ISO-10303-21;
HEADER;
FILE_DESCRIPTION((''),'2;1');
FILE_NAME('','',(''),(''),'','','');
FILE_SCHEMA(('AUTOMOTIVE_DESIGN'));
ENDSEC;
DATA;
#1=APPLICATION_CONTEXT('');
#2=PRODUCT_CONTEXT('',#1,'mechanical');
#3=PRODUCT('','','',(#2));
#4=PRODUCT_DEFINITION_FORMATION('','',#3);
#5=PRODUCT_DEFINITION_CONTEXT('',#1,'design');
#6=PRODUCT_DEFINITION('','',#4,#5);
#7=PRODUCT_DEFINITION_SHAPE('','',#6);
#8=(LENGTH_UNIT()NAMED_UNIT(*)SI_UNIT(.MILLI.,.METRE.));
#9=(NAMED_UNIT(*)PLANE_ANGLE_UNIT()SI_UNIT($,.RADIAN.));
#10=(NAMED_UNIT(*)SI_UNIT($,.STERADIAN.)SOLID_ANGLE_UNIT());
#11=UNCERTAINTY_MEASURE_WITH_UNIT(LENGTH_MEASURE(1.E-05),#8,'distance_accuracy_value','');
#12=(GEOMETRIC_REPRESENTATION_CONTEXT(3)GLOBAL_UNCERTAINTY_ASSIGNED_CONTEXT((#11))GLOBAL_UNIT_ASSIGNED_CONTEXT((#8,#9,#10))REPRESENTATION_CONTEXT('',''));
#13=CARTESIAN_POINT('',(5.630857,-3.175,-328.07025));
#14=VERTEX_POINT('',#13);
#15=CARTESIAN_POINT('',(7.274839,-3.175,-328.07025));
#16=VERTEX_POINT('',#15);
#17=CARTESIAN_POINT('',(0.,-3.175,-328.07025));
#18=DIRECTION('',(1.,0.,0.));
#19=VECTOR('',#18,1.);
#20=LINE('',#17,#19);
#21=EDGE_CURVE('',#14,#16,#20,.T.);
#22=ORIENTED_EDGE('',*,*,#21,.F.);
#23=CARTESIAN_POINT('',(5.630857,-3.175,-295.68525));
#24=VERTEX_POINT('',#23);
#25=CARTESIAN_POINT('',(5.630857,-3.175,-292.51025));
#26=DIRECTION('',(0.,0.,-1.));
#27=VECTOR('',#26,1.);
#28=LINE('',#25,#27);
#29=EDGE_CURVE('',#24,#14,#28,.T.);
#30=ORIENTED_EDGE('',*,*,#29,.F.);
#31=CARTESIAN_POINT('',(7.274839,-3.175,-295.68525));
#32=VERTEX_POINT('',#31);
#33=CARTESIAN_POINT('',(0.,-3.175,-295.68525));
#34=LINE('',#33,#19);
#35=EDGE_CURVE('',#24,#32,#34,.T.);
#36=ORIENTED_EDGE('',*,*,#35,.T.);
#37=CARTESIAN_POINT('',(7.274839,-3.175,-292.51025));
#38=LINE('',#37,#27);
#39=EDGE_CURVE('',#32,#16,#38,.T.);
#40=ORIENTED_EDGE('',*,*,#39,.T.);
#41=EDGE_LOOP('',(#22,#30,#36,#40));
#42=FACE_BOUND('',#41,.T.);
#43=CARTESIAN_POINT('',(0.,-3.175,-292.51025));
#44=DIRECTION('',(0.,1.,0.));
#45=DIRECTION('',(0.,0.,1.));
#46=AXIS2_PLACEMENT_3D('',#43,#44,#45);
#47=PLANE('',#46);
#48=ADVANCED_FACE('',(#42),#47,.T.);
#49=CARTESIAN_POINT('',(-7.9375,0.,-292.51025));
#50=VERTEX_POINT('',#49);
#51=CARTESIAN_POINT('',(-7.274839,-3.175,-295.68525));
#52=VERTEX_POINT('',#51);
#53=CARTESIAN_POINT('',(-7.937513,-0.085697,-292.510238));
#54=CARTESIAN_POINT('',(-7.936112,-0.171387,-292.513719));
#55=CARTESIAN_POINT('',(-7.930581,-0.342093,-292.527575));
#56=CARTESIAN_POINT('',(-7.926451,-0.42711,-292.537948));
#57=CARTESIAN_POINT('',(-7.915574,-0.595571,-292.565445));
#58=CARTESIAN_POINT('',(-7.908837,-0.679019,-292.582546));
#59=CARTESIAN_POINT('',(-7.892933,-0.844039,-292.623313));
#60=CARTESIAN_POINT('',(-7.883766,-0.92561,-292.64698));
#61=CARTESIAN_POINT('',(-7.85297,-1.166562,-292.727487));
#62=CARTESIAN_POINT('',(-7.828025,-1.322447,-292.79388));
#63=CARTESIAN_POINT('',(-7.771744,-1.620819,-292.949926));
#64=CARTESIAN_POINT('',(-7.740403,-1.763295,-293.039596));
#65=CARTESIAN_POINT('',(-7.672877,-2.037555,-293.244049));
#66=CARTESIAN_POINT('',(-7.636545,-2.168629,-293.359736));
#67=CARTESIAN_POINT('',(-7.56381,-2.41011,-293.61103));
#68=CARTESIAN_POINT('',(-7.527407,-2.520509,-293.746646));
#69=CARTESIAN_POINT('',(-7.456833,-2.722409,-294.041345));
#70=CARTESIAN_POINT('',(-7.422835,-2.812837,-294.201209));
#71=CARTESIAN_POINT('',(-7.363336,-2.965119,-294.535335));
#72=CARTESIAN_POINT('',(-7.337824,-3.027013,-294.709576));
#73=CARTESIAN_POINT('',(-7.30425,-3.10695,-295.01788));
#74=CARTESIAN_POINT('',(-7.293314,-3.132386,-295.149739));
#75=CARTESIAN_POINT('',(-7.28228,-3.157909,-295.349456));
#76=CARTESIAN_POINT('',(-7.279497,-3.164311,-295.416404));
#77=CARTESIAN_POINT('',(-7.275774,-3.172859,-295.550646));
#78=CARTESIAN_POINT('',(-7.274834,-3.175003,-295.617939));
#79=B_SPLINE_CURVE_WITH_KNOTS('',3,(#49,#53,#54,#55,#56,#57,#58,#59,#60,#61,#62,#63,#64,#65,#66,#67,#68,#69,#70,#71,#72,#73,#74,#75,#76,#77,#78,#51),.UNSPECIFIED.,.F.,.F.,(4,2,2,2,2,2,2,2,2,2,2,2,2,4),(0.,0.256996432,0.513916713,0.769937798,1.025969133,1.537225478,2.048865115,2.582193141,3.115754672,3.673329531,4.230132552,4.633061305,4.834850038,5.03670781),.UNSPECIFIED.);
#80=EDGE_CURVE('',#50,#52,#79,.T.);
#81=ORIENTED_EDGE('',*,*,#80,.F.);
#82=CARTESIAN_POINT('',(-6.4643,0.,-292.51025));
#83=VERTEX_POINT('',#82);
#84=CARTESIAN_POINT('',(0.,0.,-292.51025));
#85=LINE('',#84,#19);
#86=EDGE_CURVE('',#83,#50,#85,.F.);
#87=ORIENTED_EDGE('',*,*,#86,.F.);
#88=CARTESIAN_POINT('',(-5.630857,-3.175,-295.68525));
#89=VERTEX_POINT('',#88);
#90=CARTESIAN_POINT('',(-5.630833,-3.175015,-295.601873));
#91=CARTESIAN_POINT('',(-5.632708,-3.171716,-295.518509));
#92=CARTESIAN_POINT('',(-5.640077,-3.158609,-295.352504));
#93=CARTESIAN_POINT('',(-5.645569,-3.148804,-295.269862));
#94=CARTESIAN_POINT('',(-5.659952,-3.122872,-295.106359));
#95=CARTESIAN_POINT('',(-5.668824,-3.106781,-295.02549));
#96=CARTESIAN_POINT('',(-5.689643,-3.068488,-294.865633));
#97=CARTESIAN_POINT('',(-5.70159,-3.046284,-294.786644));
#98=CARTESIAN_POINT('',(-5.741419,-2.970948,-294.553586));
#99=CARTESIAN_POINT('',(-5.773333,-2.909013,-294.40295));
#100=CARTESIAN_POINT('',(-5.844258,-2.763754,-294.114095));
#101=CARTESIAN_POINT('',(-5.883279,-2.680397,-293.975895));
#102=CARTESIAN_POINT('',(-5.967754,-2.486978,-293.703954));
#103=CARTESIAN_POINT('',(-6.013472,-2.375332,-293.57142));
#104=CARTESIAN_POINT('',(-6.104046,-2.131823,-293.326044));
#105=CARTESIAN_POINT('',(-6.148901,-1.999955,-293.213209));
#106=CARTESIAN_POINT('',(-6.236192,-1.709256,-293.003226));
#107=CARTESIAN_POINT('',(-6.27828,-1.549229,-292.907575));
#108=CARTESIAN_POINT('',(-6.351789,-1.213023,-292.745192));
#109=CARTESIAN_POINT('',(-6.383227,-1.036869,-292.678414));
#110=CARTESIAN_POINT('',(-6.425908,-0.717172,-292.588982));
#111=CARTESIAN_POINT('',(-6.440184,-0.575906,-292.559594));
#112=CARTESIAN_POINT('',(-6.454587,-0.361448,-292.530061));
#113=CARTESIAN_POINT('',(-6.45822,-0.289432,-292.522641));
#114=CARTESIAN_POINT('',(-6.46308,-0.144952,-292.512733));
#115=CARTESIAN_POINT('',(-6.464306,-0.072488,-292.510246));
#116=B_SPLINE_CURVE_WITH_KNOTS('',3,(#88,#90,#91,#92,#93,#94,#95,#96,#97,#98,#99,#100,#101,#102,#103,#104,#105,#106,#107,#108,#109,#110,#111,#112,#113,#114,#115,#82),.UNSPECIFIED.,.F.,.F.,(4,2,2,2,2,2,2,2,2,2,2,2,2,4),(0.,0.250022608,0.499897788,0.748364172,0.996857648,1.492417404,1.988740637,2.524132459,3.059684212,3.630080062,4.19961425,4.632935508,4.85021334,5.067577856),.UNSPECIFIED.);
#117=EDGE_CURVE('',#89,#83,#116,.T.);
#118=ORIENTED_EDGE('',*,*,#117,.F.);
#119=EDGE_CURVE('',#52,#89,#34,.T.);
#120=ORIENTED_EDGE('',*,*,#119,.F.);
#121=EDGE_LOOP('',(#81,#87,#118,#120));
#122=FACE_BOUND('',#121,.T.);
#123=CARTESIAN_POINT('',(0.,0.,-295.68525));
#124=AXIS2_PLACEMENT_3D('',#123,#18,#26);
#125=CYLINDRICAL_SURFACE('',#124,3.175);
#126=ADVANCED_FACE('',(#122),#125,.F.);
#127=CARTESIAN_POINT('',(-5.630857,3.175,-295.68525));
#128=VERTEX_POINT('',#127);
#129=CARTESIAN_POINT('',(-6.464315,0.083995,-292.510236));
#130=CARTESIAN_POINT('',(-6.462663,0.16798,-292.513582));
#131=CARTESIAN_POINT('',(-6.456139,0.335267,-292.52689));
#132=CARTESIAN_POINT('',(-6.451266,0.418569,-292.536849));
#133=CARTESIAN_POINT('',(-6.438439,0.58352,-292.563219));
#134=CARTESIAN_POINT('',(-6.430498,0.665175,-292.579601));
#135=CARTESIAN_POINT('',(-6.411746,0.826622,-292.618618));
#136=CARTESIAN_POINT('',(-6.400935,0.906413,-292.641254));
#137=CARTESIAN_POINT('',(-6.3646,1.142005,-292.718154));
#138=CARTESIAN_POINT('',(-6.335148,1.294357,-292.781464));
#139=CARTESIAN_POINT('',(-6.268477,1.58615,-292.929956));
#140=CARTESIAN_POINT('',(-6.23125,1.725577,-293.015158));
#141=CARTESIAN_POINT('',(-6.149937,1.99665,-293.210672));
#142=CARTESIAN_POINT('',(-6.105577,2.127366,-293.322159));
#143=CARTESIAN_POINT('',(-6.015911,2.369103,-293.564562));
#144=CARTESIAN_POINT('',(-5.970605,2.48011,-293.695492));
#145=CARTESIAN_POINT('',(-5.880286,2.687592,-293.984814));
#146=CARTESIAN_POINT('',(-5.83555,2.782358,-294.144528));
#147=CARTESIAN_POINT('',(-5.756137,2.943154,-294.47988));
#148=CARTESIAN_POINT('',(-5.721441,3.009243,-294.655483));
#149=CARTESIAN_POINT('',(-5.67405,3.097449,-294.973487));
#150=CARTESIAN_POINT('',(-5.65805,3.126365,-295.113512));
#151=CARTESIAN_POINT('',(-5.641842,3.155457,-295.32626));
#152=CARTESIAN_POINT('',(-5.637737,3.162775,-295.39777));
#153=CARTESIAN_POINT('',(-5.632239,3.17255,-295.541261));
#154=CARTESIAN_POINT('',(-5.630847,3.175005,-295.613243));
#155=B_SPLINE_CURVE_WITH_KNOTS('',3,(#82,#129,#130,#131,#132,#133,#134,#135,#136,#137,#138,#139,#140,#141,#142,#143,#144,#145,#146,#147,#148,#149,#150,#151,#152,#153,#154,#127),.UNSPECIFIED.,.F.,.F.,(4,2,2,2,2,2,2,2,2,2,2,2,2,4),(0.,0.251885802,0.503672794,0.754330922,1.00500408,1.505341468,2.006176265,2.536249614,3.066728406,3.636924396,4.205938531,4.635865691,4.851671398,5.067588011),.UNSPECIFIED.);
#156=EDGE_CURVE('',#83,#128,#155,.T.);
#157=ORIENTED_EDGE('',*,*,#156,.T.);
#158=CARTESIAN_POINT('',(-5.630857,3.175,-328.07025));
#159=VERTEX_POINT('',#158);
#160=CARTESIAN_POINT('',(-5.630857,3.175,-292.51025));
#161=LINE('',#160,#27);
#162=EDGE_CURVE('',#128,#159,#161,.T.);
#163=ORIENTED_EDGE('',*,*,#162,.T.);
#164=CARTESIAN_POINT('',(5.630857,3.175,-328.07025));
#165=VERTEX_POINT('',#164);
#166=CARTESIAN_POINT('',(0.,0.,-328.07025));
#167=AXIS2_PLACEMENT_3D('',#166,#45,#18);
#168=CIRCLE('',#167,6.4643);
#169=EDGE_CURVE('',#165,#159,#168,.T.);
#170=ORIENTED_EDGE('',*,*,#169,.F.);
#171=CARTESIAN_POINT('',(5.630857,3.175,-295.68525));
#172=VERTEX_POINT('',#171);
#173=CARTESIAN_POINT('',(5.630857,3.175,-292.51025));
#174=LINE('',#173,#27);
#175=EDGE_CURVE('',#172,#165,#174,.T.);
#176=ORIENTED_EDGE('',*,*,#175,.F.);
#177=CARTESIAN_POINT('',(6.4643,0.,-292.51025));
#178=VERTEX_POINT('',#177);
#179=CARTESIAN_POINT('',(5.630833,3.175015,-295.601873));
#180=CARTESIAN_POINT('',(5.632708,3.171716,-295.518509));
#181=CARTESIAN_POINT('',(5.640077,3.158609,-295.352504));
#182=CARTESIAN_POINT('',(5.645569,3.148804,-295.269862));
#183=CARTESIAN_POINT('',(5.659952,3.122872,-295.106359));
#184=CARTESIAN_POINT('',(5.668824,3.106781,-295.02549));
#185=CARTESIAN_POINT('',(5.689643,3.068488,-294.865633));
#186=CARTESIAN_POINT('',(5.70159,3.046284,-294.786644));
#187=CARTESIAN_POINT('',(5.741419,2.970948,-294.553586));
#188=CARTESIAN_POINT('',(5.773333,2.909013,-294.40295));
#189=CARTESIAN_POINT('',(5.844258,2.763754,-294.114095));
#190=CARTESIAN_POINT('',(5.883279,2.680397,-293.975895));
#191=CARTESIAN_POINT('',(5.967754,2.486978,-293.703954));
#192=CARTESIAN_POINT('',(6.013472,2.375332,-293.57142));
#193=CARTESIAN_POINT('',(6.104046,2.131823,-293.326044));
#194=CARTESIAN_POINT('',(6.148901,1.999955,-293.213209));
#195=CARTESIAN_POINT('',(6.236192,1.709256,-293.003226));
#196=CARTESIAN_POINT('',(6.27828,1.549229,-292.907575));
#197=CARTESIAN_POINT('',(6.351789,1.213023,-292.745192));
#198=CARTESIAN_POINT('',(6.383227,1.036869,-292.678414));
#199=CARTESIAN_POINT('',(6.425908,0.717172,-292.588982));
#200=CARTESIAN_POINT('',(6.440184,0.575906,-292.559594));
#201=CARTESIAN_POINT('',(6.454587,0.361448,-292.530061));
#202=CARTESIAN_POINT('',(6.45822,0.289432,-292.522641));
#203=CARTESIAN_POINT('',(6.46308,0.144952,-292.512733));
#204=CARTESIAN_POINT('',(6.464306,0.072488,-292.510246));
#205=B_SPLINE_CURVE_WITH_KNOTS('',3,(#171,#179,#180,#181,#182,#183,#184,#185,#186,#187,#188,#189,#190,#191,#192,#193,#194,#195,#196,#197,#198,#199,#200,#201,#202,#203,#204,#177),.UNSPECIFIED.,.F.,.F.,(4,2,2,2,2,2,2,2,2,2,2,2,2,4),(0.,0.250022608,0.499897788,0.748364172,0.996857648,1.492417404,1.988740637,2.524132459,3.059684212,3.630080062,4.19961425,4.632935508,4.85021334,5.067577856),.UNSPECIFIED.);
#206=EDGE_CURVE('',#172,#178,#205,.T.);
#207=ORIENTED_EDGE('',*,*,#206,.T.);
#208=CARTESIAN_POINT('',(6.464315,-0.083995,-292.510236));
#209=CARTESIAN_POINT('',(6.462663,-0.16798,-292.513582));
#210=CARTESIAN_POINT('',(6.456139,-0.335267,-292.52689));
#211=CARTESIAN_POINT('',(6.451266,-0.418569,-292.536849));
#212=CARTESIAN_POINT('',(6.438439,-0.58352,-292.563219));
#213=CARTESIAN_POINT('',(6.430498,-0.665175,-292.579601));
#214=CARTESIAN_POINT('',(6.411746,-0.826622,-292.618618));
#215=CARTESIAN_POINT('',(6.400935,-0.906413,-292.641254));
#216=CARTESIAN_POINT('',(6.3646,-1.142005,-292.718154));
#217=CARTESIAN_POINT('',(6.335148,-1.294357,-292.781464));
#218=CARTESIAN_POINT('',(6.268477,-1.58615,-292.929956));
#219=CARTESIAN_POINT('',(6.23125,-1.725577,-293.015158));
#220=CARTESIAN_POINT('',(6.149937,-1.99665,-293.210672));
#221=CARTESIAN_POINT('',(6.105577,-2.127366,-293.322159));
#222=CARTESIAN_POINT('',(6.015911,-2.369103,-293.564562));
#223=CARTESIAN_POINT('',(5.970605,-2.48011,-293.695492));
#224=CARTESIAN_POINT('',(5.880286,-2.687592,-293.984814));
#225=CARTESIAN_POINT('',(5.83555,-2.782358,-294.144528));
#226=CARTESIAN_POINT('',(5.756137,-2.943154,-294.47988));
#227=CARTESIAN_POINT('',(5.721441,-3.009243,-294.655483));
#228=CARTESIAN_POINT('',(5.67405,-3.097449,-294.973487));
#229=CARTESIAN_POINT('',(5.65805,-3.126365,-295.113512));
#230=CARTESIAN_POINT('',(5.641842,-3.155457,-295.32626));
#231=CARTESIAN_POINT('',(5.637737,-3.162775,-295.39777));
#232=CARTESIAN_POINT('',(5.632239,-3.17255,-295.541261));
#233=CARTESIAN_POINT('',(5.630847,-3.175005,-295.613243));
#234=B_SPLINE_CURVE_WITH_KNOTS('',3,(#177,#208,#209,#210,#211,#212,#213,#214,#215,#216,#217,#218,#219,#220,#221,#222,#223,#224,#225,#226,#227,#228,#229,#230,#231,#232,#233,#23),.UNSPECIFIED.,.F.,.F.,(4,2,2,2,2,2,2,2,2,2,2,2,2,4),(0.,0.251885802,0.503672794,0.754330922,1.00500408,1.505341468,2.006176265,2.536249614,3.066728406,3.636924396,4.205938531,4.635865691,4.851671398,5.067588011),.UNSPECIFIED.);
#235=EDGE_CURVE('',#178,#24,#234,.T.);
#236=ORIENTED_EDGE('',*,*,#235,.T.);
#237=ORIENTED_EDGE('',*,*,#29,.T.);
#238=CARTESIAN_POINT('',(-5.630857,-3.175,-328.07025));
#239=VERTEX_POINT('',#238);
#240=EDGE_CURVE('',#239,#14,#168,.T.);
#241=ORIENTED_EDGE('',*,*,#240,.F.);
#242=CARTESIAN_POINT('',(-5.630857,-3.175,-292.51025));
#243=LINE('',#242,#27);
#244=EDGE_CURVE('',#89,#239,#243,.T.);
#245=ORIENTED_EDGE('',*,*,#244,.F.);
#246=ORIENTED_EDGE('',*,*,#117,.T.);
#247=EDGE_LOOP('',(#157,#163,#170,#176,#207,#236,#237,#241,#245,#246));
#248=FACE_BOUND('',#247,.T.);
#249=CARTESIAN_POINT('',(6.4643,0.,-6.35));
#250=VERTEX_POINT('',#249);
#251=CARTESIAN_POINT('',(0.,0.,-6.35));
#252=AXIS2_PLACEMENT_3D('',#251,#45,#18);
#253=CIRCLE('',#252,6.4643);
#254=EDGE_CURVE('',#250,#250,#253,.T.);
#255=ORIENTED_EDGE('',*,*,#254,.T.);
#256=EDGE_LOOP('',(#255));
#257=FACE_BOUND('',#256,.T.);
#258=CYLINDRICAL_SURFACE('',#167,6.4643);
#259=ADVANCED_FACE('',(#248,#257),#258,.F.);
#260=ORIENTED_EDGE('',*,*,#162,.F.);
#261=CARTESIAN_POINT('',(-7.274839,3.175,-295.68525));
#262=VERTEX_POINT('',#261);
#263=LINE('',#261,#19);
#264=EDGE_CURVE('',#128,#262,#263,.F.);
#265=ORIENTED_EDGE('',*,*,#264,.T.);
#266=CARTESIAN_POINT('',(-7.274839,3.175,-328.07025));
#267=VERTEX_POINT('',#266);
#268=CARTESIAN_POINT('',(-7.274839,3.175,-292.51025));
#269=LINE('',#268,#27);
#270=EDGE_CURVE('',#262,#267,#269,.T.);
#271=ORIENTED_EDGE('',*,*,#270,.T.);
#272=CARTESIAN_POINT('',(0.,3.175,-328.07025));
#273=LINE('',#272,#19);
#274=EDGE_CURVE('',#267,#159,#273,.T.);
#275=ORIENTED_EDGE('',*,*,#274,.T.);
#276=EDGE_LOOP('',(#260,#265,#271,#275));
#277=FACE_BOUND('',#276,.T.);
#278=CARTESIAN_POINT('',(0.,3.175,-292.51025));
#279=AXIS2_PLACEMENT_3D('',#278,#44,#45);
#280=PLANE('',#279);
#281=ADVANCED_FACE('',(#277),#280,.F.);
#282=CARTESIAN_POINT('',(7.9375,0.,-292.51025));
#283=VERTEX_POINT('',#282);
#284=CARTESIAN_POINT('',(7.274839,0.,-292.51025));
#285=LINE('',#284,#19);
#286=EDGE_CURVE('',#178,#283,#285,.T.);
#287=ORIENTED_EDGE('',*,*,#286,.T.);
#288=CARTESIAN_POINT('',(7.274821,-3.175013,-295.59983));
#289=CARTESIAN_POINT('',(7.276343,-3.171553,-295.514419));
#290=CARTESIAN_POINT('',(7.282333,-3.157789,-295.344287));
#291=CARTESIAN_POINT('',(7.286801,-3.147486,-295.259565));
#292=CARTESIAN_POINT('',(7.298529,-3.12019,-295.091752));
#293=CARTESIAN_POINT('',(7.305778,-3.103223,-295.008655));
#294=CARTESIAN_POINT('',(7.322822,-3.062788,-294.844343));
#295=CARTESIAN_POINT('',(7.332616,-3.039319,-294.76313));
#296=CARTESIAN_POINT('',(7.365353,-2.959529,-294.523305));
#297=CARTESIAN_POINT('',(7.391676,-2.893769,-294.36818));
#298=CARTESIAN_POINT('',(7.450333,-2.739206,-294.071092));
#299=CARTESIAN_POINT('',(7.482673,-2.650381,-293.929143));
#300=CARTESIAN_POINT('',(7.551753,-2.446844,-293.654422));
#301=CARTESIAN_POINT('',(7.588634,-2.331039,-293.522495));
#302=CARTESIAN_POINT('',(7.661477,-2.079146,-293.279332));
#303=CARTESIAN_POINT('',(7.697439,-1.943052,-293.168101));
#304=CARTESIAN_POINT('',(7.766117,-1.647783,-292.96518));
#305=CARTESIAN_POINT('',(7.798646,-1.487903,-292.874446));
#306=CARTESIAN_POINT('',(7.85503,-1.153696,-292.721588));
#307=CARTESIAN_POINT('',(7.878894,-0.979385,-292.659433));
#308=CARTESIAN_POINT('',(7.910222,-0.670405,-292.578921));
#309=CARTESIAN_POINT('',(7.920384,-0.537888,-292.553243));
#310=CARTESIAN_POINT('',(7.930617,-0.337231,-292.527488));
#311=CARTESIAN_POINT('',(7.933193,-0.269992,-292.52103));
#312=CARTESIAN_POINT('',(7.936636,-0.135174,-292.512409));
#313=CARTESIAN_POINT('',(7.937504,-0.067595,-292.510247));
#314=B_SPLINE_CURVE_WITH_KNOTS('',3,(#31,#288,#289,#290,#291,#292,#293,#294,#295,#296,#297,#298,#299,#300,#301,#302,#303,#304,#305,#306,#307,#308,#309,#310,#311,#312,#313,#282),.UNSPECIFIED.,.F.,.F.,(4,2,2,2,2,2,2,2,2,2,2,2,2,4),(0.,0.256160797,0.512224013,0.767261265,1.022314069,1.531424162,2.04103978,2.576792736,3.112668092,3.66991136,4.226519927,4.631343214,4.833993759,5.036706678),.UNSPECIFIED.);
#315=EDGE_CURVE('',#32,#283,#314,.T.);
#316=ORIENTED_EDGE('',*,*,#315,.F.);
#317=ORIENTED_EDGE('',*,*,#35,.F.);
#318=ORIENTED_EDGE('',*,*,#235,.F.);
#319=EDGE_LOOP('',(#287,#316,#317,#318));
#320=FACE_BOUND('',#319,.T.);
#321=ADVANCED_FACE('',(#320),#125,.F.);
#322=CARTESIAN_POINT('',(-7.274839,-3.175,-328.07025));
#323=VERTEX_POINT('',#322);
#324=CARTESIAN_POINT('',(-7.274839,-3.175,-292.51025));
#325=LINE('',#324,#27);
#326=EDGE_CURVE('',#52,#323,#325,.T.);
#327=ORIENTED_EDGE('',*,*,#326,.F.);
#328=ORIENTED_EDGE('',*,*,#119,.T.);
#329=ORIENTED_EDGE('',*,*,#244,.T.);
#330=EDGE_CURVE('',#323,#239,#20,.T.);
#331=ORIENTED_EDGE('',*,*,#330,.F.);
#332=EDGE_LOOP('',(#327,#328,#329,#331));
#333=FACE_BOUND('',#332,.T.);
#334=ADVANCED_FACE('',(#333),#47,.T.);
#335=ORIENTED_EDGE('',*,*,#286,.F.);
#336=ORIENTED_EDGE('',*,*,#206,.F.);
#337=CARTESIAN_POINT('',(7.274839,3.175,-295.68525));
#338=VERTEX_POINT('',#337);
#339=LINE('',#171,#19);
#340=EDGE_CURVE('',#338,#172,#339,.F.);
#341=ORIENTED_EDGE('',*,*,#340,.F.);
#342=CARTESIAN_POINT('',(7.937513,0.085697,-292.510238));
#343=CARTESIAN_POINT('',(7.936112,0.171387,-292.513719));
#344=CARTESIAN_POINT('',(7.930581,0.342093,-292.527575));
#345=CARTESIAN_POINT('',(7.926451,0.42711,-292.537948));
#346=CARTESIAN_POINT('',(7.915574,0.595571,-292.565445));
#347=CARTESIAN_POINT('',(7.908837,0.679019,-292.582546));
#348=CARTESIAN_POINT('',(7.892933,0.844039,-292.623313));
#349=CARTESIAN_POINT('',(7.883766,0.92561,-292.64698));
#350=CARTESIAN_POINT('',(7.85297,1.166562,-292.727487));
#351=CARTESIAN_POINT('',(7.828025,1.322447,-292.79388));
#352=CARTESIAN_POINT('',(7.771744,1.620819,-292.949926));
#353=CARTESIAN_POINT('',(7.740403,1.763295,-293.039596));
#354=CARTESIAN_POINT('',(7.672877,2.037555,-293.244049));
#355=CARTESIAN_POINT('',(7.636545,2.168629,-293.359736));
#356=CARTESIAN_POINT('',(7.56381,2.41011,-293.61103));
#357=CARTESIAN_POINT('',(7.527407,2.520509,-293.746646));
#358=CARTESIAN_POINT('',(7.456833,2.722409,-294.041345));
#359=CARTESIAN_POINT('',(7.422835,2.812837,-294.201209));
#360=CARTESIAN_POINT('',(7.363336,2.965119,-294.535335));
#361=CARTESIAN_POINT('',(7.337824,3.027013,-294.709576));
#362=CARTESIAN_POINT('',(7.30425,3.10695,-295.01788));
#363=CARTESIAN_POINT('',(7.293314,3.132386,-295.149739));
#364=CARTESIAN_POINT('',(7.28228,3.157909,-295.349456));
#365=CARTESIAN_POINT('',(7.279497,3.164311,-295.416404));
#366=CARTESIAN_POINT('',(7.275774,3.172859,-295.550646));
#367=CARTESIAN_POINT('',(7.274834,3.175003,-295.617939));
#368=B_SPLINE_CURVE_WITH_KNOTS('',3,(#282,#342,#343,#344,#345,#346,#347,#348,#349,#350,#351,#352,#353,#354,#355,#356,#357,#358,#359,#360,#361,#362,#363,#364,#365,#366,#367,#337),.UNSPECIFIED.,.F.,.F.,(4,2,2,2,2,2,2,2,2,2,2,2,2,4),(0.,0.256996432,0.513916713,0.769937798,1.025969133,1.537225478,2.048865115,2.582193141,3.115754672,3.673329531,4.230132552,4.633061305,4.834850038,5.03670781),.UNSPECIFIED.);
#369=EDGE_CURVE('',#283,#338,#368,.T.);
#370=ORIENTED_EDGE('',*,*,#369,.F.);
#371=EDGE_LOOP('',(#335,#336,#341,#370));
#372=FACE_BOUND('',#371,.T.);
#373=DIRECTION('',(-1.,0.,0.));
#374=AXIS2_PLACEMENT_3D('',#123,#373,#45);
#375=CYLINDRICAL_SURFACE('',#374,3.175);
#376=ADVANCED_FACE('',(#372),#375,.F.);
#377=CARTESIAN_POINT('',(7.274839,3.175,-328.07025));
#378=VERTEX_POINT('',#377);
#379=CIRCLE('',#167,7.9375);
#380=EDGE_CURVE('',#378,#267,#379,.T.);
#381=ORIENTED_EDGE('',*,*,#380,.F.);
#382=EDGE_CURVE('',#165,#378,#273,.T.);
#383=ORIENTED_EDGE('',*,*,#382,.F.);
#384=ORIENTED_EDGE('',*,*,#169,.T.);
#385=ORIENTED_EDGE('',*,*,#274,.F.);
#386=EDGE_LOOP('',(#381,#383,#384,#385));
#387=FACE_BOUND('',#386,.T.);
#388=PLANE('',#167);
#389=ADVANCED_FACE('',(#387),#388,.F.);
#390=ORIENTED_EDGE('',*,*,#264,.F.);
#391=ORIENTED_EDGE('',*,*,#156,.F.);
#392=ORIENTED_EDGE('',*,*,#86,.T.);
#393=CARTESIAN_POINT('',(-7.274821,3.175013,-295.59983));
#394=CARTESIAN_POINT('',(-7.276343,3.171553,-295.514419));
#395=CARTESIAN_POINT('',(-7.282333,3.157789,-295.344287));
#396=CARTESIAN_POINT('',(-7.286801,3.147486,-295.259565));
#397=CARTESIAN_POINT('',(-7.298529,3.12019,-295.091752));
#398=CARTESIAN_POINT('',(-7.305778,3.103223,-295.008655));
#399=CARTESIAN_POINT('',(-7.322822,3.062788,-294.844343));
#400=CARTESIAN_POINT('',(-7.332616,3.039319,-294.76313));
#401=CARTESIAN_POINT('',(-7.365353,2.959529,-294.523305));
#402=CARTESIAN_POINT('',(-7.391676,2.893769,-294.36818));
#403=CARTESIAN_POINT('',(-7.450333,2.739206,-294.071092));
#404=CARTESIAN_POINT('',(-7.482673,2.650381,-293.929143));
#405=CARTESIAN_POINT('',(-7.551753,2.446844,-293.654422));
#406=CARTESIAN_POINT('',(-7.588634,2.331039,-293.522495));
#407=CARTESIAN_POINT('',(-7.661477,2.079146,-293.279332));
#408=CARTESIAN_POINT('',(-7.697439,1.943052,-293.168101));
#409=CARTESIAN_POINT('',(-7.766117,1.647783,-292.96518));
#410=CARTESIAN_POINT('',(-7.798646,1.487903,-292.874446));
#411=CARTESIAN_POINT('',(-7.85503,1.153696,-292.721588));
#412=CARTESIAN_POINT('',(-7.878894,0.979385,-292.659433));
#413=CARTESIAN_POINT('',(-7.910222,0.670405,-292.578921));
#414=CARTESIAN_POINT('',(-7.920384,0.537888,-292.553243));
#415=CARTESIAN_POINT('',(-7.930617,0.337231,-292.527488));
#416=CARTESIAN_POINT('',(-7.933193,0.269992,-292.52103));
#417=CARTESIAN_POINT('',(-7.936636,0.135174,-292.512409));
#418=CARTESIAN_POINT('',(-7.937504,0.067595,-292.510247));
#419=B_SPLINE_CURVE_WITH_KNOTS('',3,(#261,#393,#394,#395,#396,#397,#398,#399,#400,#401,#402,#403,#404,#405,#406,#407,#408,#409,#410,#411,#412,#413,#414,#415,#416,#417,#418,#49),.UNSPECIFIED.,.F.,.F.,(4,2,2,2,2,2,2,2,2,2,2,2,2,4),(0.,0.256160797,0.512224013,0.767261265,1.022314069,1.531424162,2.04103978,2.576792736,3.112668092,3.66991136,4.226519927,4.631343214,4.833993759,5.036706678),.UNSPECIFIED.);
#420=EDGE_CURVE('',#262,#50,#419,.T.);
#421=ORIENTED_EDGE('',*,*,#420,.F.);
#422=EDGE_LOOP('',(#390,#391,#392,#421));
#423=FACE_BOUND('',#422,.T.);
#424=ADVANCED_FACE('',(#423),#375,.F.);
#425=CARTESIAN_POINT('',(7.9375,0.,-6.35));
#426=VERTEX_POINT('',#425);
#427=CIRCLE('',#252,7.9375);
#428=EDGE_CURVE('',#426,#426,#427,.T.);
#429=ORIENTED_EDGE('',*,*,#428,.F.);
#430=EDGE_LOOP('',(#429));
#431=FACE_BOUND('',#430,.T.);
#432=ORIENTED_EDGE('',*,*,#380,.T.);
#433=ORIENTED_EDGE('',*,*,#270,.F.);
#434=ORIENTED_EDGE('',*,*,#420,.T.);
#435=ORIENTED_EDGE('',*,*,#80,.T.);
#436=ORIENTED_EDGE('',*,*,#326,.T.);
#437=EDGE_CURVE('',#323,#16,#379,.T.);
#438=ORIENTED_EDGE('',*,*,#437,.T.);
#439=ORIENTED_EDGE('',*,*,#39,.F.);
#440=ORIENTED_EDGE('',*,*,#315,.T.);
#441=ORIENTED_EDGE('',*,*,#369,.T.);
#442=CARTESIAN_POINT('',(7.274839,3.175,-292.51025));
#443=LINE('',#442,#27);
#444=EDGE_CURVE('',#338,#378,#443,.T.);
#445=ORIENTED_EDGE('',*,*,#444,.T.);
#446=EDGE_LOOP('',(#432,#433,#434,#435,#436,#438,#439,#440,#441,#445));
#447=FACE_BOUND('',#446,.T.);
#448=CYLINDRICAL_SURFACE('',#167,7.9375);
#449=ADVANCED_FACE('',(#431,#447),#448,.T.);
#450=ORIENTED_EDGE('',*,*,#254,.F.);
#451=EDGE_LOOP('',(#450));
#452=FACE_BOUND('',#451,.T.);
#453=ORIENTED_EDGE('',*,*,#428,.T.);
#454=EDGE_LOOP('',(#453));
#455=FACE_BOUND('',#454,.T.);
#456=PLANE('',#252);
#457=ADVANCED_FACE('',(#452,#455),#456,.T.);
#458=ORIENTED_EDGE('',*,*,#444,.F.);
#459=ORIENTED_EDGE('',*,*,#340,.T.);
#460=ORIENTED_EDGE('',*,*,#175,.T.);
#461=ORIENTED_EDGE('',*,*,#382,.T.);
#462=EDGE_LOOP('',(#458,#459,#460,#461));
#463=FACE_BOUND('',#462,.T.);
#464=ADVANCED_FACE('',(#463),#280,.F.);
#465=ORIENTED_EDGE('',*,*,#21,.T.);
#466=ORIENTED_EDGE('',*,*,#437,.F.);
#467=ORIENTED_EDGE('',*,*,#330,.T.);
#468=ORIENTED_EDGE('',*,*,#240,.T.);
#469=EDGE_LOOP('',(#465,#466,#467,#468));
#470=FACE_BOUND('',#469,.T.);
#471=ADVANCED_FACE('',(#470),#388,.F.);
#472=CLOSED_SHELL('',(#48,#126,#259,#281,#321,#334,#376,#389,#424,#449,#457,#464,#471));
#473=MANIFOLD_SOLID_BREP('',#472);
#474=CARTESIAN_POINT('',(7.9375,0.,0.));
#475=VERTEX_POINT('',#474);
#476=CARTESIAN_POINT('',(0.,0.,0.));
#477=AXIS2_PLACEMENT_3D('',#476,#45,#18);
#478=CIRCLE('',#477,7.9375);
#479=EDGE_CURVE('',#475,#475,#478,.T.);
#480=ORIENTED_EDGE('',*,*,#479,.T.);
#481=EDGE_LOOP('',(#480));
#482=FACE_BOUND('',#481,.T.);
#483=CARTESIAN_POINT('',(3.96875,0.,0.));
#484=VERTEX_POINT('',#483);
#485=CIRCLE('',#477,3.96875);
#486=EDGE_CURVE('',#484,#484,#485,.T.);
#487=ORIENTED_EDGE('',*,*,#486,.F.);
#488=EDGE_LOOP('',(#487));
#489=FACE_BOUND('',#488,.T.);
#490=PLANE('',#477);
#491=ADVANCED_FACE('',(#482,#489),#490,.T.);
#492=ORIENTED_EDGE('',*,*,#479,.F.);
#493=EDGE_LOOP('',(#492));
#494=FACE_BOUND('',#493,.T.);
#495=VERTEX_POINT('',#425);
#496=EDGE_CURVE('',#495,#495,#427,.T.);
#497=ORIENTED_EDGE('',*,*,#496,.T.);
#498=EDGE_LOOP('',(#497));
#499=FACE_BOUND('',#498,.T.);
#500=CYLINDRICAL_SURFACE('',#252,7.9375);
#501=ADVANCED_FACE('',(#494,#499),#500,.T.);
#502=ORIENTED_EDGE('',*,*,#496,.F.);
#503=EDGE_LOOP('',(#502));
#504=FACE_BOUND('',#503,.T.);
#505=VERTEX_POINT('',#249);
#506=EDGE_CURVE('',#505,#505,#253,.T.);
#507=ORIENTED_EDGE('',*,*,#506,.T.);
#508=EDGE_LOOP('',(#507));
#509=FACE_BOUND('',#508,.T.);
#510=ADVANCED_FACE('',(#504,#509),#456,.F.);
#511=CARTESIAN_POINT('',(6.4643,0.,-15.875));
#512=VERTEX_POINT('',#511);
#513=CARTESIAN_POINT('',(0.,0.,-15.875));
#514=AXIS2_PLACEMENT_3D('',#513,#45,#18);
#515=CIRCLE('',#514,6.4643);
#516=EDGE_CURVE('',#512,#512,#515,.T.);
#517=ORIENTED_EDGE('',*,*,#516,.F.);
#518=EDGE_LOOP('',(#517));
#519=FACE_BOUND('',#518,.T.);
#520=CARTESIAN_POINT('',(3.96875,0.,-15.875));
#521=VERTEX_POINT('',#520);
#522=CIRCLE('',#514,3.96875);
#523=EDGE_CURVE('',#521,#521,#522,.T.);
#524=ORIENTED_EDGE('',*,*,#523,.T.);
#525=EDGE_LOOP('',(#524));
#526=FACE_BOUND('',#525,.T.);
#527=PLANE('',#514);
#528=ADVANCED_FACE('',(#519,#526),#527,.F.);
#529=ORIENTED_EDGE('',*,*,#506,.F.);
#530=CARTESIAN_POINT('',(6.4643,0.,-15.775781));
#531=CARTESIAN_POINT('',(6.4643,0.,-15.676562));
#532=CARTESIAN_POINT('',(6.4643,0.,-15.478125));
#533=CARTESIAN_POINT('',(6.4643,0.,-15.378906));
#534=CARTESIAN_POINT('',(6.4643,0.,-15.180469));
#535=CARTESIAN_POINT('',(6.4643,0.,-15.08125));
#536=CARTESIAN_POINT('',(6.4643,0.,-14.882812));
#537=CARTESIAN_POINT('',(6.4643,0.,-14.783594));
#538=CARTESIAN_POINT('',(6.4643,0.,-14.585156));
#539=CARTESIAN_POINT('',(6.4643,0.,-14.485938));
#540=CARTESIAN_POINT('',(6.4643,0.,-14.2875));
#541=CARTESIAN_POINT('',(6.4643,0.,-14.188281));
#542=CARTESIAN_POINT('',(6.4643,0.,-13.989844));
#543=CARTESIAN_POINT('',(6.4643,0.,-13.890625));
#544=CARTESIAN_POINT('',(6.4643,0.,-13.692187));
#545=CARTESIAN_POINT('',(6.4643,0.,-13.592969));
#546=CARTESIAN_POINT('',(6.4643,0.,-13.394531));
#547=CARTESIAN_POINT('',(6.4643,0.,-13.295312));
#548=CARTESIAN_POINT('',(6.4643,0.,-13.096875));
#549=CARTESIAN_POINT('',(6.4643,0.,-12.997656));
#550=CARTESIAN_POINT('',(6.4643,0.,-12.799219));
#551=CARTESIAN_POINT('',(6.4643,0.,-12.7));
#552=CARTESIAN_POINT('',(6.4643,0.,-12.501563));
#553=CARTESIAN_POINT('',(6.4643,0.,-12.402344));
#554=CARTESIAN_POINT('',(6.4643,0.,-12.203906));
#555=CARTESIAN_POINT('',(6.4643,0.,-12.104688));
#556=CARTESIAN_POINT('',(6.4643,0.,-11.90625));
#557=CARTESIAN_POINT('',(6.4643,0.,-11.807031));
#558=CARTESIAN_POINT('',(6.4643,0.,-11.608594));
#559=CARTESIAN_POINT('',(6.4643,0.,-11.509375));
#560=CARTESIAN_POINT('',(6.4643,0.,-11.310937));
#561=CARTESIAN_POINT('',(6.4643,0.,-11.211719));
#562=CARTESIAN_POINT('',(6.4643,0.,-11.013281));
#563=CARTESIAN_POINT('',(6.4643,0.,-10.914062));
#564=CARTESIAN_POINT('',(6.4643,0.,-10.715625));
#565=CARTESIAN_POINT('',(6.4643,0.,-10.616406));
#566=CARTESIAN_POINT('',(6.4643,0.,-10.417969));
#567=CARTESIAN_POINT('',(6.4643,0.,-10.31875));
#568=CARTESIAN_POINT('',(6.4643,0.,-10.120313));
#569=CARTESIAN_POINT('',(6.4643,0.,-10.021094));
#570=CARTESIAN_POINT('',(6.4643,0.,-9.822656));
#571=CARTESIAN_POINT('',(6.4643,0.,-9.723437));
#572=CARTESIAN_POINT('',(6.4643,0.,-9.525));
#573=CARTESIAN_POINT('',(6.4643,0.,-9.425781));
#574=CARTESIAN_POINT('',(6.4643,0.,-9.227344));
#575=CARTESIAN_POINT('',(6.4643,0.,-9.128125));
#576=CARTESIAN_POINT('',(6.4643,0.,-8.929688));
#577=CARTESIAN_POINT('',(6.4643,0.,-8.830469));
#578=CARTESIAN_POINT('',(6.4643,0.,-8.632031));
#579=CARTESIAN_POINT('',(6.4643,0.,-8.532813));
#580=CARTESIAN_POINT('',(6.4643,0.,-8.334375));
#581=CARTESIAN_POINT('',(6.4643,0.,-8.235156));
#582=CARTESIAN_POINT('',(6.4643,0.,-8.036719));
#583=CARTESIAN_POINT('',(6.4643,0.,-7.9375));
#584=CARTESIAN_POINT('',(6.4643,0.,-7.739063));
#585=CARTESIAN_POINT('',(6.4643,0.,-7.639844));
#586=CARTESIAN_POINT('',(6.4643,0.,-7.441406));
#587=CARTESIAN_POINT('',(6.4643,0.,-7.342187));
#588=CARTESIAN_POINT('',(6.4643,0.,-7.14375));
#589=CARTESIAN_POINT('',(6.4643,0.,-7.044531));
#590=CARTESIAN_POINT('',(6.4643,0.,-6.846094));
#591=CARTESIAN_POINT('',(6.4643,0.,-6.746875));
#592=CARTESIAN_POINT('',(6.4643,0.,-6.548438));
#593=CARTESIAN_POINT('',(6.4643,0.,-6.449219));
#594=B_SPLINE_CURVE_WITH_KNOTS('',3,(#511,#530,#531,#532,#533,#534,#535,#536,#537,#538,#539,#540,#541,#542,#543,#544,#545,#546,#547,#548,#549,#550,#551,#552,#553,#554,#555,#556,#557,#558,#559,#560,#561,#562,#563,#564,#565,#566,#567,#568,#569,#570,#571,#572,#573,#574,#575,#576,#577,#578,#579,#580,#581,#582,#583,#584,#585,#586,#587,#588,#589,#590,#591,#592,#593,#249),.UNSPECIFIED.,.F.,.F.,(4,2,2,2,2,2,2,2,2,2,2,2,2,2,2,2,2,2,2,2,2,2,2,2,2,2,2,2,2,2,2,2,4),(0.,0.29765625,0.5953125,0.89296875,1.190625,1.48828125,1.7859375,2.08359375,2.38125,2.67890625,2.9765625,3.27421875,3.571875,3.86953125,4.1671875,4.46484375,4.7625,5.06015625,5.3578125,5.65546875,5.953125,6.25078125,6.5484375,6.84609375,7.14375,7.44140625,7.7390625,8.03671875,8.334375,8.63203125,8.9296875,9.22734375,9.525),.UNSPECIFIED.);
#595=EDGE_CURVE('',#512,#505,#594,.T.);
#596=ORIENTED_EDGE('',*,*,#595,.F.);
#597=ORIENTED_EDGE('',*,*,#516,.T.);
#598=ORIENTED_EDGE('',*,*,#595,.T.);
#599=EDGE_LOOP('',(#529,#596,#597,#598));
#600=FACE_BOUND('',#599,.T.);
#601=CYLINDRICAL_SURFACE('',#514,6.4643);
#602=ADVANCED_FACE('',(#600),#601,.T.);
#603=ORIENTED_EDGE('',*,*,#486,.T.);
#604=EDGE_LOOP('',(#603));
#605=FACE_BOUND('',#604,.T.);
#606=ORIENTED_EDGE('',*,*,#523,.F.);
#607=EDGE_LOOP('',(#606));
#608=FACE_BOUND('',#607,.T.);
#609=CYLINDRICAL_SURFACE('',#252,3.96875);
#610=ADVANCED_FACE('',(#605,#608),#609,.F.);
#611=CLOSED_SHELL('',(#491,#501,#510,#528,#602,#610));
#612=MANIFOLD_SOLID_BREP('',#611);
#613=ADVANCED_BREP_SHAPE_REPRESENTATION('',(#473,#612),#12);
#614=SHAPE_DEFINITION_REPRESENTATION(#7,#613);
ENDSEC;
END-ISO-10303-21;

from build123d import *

# Parameters (mm, degrees)
THREADED_INSERT_1_1_DEPTH = 6.35
THREADED_START            = -6.35
THREADED_INSERT_1_2_DEPTH = 9.525
A_ARM_START               = -6.35
A_ARM_TUBE_DEPTH          = 321.72025
APEX_START                = -292.51025
APEX_SLOT_DEPTH           = 35.56
FILLET1_R                 = 3.175


with BuildPart() as part:
    # Sketch1 → Threaded insert 1-1 (new body)
    with BuildSketch(Plane.XY):
        with BuildLine():
            ThreePointArc((-2.38125, 3.175), (0, 3.96875), (2.38125, 3.175))
            Line((2.38125, 3.175), (5.630856905, 3.175))
            ThreePointArc((5.630856905, 3.175), (0, 6.4643), (-5.630856905, 3.175))
            Line((-5.630856905, 3.175), (-2.38125, 3.175))
        make_face()
        with BuildLine():
            ThreePointArc((-5.630856905, 3.175), (0, 6.4643), (5.630856905, 3.175))
            Line((5.630856905, 3.175), (7.274838916, 3.175))
            ThreePointArc((7.274838916, 3.175), (0, 7.9375), (-7.274838916, 3.175))
            Line((-7.274838916, 3.175), (-5.630856905, 3.175))
        make_face()
        with BuildLine():
            ThreePointArc((2.38125, 3.175), (3.549757914, 1.774878957), (3.96875, 0))
            Line((3.96875, 0), (6.4643, 0))
            ThreePointArc((6.4643, 0), (6.252468424, 1.641283978), (5.630856905, 3.175))
            Line((5.630856905, 3.175), (2.38125, 3.175))
        make_face()
        with BuildLine():
            Line((-6.4643, 0), (-3.96875, 0))
            ThreePointArc((-3.96875, 0), (-3.549757914, 1.774878957), (-2.38125, 3.175))
            Line((-2.38125, 3.175), (-5.630856905, 3.175))
            ThreePointArc((-5.630856905, 3.175), (-6.252468424, 1.641283978), (-6.4643, 0))
        make_face()
        with BuildLine():
            ThreePointArc((5.630856905, 3.175), (6.252468424, 1.641283978), (6.4643, 0))
            Line((6.4643, 0), (7.9375, 0))
            ThreePointArc((7.9375, 0), (7.770068859, 1.621707797), (7.274838916, 3.175))
            Line((7.274838916, 3.175), (5.630856905, 3.175))
        make_face()
        with BuildLine():
            Line((-7.9375, 0), (-6.4643, 0))
            ThreePointArc((-6.4643, 0), (-6.252468424, 1.641283978), (-5.630856905, 3.175))
            Line((-5.630856905, 3.175), (-7.274838916, 3.175))
            ThreePointArc((-7.274838916, 3.175), (-7.770068859, 1.621707797), (-7.9375, 0))
        make_face()
        with BuildLine():
            Line((7.9375, 0), (6.4643, 0))
            ThreePointArc((6.4643, 0), (6.252468424, -1.641283978), (5.630856905, -3.175))
            Line((5.630856905, -3.175), (7.274838916, -3.175))
            ThreePointArc((7.274838916, -3.175), (7.770068859, -1.621707797), (7.9375, 0))
        make_face()
        with BuildLine():
            ThreePointArc((-5.630856905, -3.175), (-6.252468424, -1.641283978), (-6.4643, 0))
            Line((-6.4643, 0), (-7.9375, 0))
            ThreePointArc((-7.9375, 0), (-7.770068859, -1.621707797), (-7.274838916, -3.175))
            Line((-7.274838916, -3.175), (-5.630856905, -3.175))
        make_face()
        with BuildLine():
            Line((6.4643, 0), (3.96875, 0))
            ThreePointArc((3.96875, 0), (3.549757914, -1.774878957), (2.38125, -3.175))
            Line((2.38125, -3.175), (5.630856905, -3.175))
            ThreePointArc((5.630856905, -3.175), (6.252468424, -1.641283978), (6.4643, 0))
        make_face()
        with BuildLine():
            ThreePointArc((-2.38125, -3.175), (-3.549757914, -1.774878957), (-3.96875, 0))
            Line((-3.96875, 0), (-6.4643, 0))
            ThreePointArc((-6.4643, 0), (-6.252468424, -1.641283978), (-5.630856905, -3.175))
            Line((-5.630856905, -3.175), (-2.38125, -3.175))
        make_face()
        with BuildLine():
            Line((5.630856905, -3.175), (2.38125, -3.175))
            ThreePointArc((2.38125, -3.175), (0, -3.96875), (-2.38125, -3.175))
            Line((-2.38125, -3.175), (-5.630856905, -3.175))
            ThreePointArc((-5.630856905, -3.175), (0, -6.4643), (5.630856905, -3.175))
        make_face()
        with BuildLine():
            Line((7.274838916, -3.175), (5.630856905, -3.175))
            ThreePointArc((5.630856905, -3.175), (0, -6.4643), (-5.630856905, -3.175))
            Line((-5.630856905, -3.175), (-7.274838916, -3.175))
            ThreePointArc((-7.274838916, -3.175), (0, -7.9375), (7.274838916, -3.175))
        make_face()
    extrude(amount=-THREADED_INSERT_1_1_DEPTH)

    # Sketch1<3> → Threaded insert 1-2 (add)
    with BuildSketch(Plane.XY.offset(THREADED_START)):
        with BuildLine():
            ThreePointArc((-2.38125, 3.175), (0, 3.96875), (2.38125, 3.175))
            Line((2.38125, 3.175), (5.630856905, 3.175))
            ThreePointArc((5.630856905, 3.175), (0, 6.4643), (-5.630856905, 3.175))
            Line((-5.630856905, 3.175), (-2.38125, 3.175))
        make_face()
        with BuildLine():
            ThreePointArc((2.38125, 3.175), (3.549757914, 1.774878957), (3.96875, 0))
            Line((3.96875, 0), (6.4643, 0))
            ThreePointArc((6.4643, 0), (6.252468424, 1.641283978), (5.630856905, 3.175))
            Line((5.630856905, 3.175), (2.38125, 3.175))
        make_face()
        with BuildLine():
            Line((-6.4643, 0), (-3.96875, 0))
            ThreePointArc((-3.96875, 0), (-3.549757914, 1.774878957), (-2.38125, 3.175))
            Line((-2.38125, 3.175), (-5.630856905, 3.175))
            ThreePointArc((-5.630856905, 3.175), (-6.252468424, 1.641283978), (-6.4643, 0))
        make_face()
        with BuildLine():
            Line((6.4643, 0), (3.96875, 0))
            ThreePointArc((3.96875, 0), (3.549757914, -1.774878957), (2.38125, -3.175))
            Line((2.38125, -3.175), (5.630856905, -3.175))
            ThreePointArc((5.630856905, -3.175), (6.252468424, -1.641283978), (6.4643, 0))
        make_face()
        with BuildLine():
            ThreePointArc((-2.38125, -3.175), (-3.549757914, -1.774878957), (-3.96875, 0))
            Line((-3.96875, 0), (-6.4643, 0))
            ThreePointArc((-6.4643, 0), (-6.252468424, -1.641283978), (-5.630856905, -3.175))
            Line((-5.630856905, -3.175), (-2.38125, -3.175))
        make_face()
        with BuildLine():
            Line((5.630856905, -3.175), (2.38125, -3.175))
            ThreePointArc((2.38125, -3.175), (0, -3.96875), (-2.38125, -3.175))
            Line((-2.38125, -3.175), (-5.630856905, -3.175))
            ThreePointArc((-5.630856905, -3.175), (0, -6.4643), (5.630856905, -3.175))
        make_face()
    extrude(amount=-THREADED_INSERT_1_2_DEPTH)


with BuildPart() as body_2:
    # Sketch1<4> → A-arm tube (new body)
    with BuildSketch(Plane.XY.offset(A_ARM_START)):
        with BuildLine():
            ThreePointArc((-5.630856905, 3.175), (0, 6.4643), (5.630856905, 3.175))
            Line((5.630856905, 3.175), (7.274838916, 3.175))
            ThreePointArc((7.274838916, 3.175), (0, 7.9375), (-7.274838916, 3.175))
            Line((-7.274838916, 3.175), (-5.630856905, 3.175))
        make_face()
        with BuildLine():
            ThreePointArc((5.630856905, 3.175), (6.252468424, 1.641283978), (6.4643, 0))
            Line((6.4643, 0), (7.9375, 0))
            ThreePointArc((7.9375, 0), (7.770068859, 1.621707797), (7.274838916, 3.175))
            Line((7.274838916, 3.175), (5.630856905, 3.175))
        make_face()
        with BuildLine():
            Line((-7.9375, 0), (-6.4643, 0))
            ThreePointArc((-6.4643, 0), (-6.252468424, 1.641283978), (-5.630856905, 3.175))
            Line((-5.630856905, 3.175), (-7.274838916, 3.175))
            ThreePointArc((-7.274838916, 3.175), (-7.770068859, 1.621707797), (-7.9375, 0))
        make_face()
        with BuildLine():
            Line((7.9375, 0), (6.4643, 0))
            ThreePointArc((6.4643, 0), (6.252468424, -1.641283978), (5.630856905, -3.175))
            Line((5.630856905, -3.175), (7.274838916, -3.175))
            ThreePointArc((7.274838916, -3.175), (7.770068859, -1.621707797), (7.9375, 0))
        make_face()
        with BuildLine():
            ThreePointArc((-5.630856905, -3.175), (-6.252468424, -1.641283978), (-6.4643, 0))
            Line((-6.4643, 0), (-7.9375, 0))
            ThreePointArc((-7.9375, 0), (-7.770068859, -1.621707797), (-7.274838916, -3.175))
            Line((-7.274838916, -3.175), (-5.630856905, -3.175))
        make_face()
        with BuildLine():
            Line((7.274838916, -3.175), (5.630856905, -3.175))
            ThreePointArc((5.630856905, -3.175), (0, -6.4643), (-5.630856905, -3.175))
            Line((-5.630856905, -3.175), (-7.274838916, -3.175))
            ThreePointArc((-7.274838916, -3.175), (0, -7.9375), (7.274838916, -3.175))
        make_face()
    extrude(amount=-A_ARM_TUBE_DEPTH)

    # Sketch1<5> → Apex slot (cut)
    with BuildSketch(Plane.XY.offset(APEX_START)):
        with BuildLine():
            ThreePointArc((5.630856905, 3.175), (6.252468424, 1.641283978), (6.4643, 0))
            Line((6.4643, 0), (7.9375, 0))
            ThreePointArc((7.9375, 0), (7.770068859, 1.621707797), (7.274838916, 3.175))
            Line((7.274838916, 3.175), (5.630856905, 3.175))
        make_face()
        with BuildLine():
            Line((-7.9375, 0), (-6.4643, 0))
            ThreePointArc((-6.4643, 0), (-6.252468424, 1.641283978), (-5.630856905, 3.175))
            Line((-5.630856905, 3.175), (-7.274838916, 3.175))
            ThreePointArc((-7.274838916, 3.175), (-7.770068859, 1.621707797), (-7.9375, 0))
        make_face()
        with BuildLine():
            Line((7.9375, 0), (6.4643, 0))
            ThreePointArc((6.4643, 0), (6.252468424, -1.641283978), (5.630856905, -3.175))
            Line((5.630856905, -3.175), (7.274838916, -3.175))
            ThreePointArc((7.274838916, -3.175), (7.770068859, -1.621707797), (7.9375, 0))
        make_face()
        with BuildLine():
            ThreePointArc((-5.630856905, -3.175), (-6.252468424, -1.641283978), (-6.4643, 0))
            Line((-6.4643, 0), (-7.9375, 0))
            ThreePointArc((-7.9375, 0), (-7.770068859, -1.621707797), (-7.274838916, -3.175))
            Line((-7.274838916, -3.175), (-5.630856905, -3.175))
        make_face()
    extrude(amount=-APEX_SLOT_DEPTH, mode=Mode.SUBTRACT)

    # Fillet1
    # the kernel refuses this fillet: 3.175 mm, written as the material it adds along each edge
    with BuildSketch(Plane(origin=(2.306643095, 3.175, -292.51025), x_dir=(0, 0, -1), z_dir=(-1, 0, 0))) as fillet1_piece_1_section:
        with BuildLine():
            CenterArc((FILLET1_R, FILLET1_R), FILLET1_R, 180, 90)
            Line((0, FILLET1_R), (0, 0))
            Line((0, 0), (FILLET1_R, 0))
        make_face()
    fillet1_piece_1 = extrude(amount=17.51898201, mode=Mode.PRIVATE)
    fillet1_piece_1 = fillet1_piece_1 - Plane(origin=(0, 0, -293.22998262), x_dir=(-0.8710698614669244, 0.49115913555994567, 0), z_dir=(0, 0, 1)) * Cylinder(6.4643, 48, mode=Mode.PRIVATE)
    fillet1_piece_1 = fillet1_piece_1 & Plane(origin=(0, 0, -293.22998262), x_dir=(-1, 0, 0), z_dir=(0, 0, 1)) * Cylinder(7.9375, 48, mode=Mode.PRIVATE)
    add(fillet1_piece_1)
    with BuildSketch(Plane(origin=(-15.212338916, -3.175, -292.51025), x_dir=(0, 0, -1), z_dir=(1, 0, 0))) as fillet1_piece_2_section:
        with BuildLine():
            CenterArc((FILLET1_R, FILLET1_R), FILLET1_R, 180, 90)
            Line((0, FILLET1_R), (0, 0))
            Line((0, 0), (FILLET1_R, 0))
        make_face()
    fillet1_piece_2 = extrude(amount=17.51898201, mode=Mode.PRIVATE)
    fillet1_piece_2 = fillet1_piece_2 - Plane(origin=(0, 0, -293.229982783), x_dir=(-0.8710698614669244, 0.49115913555994567, 0), z_dir=(0, 0, 1)) * Cylinder(6.4643, 48, mode=Mode.PRIVATE)
    fillet1_piece_2 = fillet1_piece_2 & Plane(origin=(0, 0, -293.229982783), x_dir=(-1, 0, 0), z_dir=(0, 0, 1)) * Cylinder(7.9375, 48, mode=Mode.PRIVATE)
    add(fillet1_piece_2)
    with BuildSketch(Plane(origin=(-2.306643095, -3.175, -292.51025), x_dir=(0, 0, -1), z_dir=(1, 0, 0))) as fillet1_piece_3_section:
        with BuildLine():
            CenterArc((FILLET1_R, FILLET1_R), FILLET1_R, 180, 90)
            Line((0, FILLET1_R), (0, 0))
            Line((0, 0), (FILLET1_R, 0))
        make_face()
    fillet1_piece_3 = extrude(amount=17.51898201, mode=Mode.PRIVATE)
    fillet1_piece_3 = fillet1_piece_3 - Plane(origin=(0, 0, -293.22998262), x_dir=(-0.8710698614669244, 0.49115913555994567, 0), z_dir=(0, 0, 1)) * Cylinder(6.4643, 48, mode=Mode.PRIVATE)
    fillet1_piece_3 = fillet1_piece_3 & Plane(origin=(0, 0, -293.22998262), x_dir=(-1, 0, 0), z_dir=(0, 0, 1)) * Cylinder(7.9375, 48, mode=Mode.PRIVATE)
    add(fillet1_piece_3)
    with BuildSketch(Plane(origin=(15.212338916, 3.175, -292.51025), x_dir=(0, -1, 0), z_dir=(-1, 0, 0))) as fillet1_piece_4_section:
        with BuildLine():
            CenterArc((FILLET1_R, -FILLET1_R), FILLET1_R, 90, 90)
            Line((0, -FILLET1_R), (0, 0))
            Line((0, 0), (FILLET1_R, 0))
        make_face()
    fillet1_piece_4 = extrude(amount=17.51898201, mode=Mode.PRIVATE)
    fillet1_piece_4 = fillet1_piece_4 - Plane(origin=(0, 0, -293.229982609), x_dir=(-0.8710698614669244, 0.49115913555994567, 0), z_dir=(0, 0, 1)) * Cylinder(6.4643, 48, mode=Mode.PRIVATE)
    fillet1_piece_4 = fillet1_piece_4 & Plane(origin=(0, 0, -293.229982609), x_dir=(-1, 0, 0), z_dir=(0, 0, 1)) * Cylinder(7.9375, 48, mode=Mode.PRIVATE)
    add(fillet1_piece_4)


solid = Compound([part.part, body_2.part])
